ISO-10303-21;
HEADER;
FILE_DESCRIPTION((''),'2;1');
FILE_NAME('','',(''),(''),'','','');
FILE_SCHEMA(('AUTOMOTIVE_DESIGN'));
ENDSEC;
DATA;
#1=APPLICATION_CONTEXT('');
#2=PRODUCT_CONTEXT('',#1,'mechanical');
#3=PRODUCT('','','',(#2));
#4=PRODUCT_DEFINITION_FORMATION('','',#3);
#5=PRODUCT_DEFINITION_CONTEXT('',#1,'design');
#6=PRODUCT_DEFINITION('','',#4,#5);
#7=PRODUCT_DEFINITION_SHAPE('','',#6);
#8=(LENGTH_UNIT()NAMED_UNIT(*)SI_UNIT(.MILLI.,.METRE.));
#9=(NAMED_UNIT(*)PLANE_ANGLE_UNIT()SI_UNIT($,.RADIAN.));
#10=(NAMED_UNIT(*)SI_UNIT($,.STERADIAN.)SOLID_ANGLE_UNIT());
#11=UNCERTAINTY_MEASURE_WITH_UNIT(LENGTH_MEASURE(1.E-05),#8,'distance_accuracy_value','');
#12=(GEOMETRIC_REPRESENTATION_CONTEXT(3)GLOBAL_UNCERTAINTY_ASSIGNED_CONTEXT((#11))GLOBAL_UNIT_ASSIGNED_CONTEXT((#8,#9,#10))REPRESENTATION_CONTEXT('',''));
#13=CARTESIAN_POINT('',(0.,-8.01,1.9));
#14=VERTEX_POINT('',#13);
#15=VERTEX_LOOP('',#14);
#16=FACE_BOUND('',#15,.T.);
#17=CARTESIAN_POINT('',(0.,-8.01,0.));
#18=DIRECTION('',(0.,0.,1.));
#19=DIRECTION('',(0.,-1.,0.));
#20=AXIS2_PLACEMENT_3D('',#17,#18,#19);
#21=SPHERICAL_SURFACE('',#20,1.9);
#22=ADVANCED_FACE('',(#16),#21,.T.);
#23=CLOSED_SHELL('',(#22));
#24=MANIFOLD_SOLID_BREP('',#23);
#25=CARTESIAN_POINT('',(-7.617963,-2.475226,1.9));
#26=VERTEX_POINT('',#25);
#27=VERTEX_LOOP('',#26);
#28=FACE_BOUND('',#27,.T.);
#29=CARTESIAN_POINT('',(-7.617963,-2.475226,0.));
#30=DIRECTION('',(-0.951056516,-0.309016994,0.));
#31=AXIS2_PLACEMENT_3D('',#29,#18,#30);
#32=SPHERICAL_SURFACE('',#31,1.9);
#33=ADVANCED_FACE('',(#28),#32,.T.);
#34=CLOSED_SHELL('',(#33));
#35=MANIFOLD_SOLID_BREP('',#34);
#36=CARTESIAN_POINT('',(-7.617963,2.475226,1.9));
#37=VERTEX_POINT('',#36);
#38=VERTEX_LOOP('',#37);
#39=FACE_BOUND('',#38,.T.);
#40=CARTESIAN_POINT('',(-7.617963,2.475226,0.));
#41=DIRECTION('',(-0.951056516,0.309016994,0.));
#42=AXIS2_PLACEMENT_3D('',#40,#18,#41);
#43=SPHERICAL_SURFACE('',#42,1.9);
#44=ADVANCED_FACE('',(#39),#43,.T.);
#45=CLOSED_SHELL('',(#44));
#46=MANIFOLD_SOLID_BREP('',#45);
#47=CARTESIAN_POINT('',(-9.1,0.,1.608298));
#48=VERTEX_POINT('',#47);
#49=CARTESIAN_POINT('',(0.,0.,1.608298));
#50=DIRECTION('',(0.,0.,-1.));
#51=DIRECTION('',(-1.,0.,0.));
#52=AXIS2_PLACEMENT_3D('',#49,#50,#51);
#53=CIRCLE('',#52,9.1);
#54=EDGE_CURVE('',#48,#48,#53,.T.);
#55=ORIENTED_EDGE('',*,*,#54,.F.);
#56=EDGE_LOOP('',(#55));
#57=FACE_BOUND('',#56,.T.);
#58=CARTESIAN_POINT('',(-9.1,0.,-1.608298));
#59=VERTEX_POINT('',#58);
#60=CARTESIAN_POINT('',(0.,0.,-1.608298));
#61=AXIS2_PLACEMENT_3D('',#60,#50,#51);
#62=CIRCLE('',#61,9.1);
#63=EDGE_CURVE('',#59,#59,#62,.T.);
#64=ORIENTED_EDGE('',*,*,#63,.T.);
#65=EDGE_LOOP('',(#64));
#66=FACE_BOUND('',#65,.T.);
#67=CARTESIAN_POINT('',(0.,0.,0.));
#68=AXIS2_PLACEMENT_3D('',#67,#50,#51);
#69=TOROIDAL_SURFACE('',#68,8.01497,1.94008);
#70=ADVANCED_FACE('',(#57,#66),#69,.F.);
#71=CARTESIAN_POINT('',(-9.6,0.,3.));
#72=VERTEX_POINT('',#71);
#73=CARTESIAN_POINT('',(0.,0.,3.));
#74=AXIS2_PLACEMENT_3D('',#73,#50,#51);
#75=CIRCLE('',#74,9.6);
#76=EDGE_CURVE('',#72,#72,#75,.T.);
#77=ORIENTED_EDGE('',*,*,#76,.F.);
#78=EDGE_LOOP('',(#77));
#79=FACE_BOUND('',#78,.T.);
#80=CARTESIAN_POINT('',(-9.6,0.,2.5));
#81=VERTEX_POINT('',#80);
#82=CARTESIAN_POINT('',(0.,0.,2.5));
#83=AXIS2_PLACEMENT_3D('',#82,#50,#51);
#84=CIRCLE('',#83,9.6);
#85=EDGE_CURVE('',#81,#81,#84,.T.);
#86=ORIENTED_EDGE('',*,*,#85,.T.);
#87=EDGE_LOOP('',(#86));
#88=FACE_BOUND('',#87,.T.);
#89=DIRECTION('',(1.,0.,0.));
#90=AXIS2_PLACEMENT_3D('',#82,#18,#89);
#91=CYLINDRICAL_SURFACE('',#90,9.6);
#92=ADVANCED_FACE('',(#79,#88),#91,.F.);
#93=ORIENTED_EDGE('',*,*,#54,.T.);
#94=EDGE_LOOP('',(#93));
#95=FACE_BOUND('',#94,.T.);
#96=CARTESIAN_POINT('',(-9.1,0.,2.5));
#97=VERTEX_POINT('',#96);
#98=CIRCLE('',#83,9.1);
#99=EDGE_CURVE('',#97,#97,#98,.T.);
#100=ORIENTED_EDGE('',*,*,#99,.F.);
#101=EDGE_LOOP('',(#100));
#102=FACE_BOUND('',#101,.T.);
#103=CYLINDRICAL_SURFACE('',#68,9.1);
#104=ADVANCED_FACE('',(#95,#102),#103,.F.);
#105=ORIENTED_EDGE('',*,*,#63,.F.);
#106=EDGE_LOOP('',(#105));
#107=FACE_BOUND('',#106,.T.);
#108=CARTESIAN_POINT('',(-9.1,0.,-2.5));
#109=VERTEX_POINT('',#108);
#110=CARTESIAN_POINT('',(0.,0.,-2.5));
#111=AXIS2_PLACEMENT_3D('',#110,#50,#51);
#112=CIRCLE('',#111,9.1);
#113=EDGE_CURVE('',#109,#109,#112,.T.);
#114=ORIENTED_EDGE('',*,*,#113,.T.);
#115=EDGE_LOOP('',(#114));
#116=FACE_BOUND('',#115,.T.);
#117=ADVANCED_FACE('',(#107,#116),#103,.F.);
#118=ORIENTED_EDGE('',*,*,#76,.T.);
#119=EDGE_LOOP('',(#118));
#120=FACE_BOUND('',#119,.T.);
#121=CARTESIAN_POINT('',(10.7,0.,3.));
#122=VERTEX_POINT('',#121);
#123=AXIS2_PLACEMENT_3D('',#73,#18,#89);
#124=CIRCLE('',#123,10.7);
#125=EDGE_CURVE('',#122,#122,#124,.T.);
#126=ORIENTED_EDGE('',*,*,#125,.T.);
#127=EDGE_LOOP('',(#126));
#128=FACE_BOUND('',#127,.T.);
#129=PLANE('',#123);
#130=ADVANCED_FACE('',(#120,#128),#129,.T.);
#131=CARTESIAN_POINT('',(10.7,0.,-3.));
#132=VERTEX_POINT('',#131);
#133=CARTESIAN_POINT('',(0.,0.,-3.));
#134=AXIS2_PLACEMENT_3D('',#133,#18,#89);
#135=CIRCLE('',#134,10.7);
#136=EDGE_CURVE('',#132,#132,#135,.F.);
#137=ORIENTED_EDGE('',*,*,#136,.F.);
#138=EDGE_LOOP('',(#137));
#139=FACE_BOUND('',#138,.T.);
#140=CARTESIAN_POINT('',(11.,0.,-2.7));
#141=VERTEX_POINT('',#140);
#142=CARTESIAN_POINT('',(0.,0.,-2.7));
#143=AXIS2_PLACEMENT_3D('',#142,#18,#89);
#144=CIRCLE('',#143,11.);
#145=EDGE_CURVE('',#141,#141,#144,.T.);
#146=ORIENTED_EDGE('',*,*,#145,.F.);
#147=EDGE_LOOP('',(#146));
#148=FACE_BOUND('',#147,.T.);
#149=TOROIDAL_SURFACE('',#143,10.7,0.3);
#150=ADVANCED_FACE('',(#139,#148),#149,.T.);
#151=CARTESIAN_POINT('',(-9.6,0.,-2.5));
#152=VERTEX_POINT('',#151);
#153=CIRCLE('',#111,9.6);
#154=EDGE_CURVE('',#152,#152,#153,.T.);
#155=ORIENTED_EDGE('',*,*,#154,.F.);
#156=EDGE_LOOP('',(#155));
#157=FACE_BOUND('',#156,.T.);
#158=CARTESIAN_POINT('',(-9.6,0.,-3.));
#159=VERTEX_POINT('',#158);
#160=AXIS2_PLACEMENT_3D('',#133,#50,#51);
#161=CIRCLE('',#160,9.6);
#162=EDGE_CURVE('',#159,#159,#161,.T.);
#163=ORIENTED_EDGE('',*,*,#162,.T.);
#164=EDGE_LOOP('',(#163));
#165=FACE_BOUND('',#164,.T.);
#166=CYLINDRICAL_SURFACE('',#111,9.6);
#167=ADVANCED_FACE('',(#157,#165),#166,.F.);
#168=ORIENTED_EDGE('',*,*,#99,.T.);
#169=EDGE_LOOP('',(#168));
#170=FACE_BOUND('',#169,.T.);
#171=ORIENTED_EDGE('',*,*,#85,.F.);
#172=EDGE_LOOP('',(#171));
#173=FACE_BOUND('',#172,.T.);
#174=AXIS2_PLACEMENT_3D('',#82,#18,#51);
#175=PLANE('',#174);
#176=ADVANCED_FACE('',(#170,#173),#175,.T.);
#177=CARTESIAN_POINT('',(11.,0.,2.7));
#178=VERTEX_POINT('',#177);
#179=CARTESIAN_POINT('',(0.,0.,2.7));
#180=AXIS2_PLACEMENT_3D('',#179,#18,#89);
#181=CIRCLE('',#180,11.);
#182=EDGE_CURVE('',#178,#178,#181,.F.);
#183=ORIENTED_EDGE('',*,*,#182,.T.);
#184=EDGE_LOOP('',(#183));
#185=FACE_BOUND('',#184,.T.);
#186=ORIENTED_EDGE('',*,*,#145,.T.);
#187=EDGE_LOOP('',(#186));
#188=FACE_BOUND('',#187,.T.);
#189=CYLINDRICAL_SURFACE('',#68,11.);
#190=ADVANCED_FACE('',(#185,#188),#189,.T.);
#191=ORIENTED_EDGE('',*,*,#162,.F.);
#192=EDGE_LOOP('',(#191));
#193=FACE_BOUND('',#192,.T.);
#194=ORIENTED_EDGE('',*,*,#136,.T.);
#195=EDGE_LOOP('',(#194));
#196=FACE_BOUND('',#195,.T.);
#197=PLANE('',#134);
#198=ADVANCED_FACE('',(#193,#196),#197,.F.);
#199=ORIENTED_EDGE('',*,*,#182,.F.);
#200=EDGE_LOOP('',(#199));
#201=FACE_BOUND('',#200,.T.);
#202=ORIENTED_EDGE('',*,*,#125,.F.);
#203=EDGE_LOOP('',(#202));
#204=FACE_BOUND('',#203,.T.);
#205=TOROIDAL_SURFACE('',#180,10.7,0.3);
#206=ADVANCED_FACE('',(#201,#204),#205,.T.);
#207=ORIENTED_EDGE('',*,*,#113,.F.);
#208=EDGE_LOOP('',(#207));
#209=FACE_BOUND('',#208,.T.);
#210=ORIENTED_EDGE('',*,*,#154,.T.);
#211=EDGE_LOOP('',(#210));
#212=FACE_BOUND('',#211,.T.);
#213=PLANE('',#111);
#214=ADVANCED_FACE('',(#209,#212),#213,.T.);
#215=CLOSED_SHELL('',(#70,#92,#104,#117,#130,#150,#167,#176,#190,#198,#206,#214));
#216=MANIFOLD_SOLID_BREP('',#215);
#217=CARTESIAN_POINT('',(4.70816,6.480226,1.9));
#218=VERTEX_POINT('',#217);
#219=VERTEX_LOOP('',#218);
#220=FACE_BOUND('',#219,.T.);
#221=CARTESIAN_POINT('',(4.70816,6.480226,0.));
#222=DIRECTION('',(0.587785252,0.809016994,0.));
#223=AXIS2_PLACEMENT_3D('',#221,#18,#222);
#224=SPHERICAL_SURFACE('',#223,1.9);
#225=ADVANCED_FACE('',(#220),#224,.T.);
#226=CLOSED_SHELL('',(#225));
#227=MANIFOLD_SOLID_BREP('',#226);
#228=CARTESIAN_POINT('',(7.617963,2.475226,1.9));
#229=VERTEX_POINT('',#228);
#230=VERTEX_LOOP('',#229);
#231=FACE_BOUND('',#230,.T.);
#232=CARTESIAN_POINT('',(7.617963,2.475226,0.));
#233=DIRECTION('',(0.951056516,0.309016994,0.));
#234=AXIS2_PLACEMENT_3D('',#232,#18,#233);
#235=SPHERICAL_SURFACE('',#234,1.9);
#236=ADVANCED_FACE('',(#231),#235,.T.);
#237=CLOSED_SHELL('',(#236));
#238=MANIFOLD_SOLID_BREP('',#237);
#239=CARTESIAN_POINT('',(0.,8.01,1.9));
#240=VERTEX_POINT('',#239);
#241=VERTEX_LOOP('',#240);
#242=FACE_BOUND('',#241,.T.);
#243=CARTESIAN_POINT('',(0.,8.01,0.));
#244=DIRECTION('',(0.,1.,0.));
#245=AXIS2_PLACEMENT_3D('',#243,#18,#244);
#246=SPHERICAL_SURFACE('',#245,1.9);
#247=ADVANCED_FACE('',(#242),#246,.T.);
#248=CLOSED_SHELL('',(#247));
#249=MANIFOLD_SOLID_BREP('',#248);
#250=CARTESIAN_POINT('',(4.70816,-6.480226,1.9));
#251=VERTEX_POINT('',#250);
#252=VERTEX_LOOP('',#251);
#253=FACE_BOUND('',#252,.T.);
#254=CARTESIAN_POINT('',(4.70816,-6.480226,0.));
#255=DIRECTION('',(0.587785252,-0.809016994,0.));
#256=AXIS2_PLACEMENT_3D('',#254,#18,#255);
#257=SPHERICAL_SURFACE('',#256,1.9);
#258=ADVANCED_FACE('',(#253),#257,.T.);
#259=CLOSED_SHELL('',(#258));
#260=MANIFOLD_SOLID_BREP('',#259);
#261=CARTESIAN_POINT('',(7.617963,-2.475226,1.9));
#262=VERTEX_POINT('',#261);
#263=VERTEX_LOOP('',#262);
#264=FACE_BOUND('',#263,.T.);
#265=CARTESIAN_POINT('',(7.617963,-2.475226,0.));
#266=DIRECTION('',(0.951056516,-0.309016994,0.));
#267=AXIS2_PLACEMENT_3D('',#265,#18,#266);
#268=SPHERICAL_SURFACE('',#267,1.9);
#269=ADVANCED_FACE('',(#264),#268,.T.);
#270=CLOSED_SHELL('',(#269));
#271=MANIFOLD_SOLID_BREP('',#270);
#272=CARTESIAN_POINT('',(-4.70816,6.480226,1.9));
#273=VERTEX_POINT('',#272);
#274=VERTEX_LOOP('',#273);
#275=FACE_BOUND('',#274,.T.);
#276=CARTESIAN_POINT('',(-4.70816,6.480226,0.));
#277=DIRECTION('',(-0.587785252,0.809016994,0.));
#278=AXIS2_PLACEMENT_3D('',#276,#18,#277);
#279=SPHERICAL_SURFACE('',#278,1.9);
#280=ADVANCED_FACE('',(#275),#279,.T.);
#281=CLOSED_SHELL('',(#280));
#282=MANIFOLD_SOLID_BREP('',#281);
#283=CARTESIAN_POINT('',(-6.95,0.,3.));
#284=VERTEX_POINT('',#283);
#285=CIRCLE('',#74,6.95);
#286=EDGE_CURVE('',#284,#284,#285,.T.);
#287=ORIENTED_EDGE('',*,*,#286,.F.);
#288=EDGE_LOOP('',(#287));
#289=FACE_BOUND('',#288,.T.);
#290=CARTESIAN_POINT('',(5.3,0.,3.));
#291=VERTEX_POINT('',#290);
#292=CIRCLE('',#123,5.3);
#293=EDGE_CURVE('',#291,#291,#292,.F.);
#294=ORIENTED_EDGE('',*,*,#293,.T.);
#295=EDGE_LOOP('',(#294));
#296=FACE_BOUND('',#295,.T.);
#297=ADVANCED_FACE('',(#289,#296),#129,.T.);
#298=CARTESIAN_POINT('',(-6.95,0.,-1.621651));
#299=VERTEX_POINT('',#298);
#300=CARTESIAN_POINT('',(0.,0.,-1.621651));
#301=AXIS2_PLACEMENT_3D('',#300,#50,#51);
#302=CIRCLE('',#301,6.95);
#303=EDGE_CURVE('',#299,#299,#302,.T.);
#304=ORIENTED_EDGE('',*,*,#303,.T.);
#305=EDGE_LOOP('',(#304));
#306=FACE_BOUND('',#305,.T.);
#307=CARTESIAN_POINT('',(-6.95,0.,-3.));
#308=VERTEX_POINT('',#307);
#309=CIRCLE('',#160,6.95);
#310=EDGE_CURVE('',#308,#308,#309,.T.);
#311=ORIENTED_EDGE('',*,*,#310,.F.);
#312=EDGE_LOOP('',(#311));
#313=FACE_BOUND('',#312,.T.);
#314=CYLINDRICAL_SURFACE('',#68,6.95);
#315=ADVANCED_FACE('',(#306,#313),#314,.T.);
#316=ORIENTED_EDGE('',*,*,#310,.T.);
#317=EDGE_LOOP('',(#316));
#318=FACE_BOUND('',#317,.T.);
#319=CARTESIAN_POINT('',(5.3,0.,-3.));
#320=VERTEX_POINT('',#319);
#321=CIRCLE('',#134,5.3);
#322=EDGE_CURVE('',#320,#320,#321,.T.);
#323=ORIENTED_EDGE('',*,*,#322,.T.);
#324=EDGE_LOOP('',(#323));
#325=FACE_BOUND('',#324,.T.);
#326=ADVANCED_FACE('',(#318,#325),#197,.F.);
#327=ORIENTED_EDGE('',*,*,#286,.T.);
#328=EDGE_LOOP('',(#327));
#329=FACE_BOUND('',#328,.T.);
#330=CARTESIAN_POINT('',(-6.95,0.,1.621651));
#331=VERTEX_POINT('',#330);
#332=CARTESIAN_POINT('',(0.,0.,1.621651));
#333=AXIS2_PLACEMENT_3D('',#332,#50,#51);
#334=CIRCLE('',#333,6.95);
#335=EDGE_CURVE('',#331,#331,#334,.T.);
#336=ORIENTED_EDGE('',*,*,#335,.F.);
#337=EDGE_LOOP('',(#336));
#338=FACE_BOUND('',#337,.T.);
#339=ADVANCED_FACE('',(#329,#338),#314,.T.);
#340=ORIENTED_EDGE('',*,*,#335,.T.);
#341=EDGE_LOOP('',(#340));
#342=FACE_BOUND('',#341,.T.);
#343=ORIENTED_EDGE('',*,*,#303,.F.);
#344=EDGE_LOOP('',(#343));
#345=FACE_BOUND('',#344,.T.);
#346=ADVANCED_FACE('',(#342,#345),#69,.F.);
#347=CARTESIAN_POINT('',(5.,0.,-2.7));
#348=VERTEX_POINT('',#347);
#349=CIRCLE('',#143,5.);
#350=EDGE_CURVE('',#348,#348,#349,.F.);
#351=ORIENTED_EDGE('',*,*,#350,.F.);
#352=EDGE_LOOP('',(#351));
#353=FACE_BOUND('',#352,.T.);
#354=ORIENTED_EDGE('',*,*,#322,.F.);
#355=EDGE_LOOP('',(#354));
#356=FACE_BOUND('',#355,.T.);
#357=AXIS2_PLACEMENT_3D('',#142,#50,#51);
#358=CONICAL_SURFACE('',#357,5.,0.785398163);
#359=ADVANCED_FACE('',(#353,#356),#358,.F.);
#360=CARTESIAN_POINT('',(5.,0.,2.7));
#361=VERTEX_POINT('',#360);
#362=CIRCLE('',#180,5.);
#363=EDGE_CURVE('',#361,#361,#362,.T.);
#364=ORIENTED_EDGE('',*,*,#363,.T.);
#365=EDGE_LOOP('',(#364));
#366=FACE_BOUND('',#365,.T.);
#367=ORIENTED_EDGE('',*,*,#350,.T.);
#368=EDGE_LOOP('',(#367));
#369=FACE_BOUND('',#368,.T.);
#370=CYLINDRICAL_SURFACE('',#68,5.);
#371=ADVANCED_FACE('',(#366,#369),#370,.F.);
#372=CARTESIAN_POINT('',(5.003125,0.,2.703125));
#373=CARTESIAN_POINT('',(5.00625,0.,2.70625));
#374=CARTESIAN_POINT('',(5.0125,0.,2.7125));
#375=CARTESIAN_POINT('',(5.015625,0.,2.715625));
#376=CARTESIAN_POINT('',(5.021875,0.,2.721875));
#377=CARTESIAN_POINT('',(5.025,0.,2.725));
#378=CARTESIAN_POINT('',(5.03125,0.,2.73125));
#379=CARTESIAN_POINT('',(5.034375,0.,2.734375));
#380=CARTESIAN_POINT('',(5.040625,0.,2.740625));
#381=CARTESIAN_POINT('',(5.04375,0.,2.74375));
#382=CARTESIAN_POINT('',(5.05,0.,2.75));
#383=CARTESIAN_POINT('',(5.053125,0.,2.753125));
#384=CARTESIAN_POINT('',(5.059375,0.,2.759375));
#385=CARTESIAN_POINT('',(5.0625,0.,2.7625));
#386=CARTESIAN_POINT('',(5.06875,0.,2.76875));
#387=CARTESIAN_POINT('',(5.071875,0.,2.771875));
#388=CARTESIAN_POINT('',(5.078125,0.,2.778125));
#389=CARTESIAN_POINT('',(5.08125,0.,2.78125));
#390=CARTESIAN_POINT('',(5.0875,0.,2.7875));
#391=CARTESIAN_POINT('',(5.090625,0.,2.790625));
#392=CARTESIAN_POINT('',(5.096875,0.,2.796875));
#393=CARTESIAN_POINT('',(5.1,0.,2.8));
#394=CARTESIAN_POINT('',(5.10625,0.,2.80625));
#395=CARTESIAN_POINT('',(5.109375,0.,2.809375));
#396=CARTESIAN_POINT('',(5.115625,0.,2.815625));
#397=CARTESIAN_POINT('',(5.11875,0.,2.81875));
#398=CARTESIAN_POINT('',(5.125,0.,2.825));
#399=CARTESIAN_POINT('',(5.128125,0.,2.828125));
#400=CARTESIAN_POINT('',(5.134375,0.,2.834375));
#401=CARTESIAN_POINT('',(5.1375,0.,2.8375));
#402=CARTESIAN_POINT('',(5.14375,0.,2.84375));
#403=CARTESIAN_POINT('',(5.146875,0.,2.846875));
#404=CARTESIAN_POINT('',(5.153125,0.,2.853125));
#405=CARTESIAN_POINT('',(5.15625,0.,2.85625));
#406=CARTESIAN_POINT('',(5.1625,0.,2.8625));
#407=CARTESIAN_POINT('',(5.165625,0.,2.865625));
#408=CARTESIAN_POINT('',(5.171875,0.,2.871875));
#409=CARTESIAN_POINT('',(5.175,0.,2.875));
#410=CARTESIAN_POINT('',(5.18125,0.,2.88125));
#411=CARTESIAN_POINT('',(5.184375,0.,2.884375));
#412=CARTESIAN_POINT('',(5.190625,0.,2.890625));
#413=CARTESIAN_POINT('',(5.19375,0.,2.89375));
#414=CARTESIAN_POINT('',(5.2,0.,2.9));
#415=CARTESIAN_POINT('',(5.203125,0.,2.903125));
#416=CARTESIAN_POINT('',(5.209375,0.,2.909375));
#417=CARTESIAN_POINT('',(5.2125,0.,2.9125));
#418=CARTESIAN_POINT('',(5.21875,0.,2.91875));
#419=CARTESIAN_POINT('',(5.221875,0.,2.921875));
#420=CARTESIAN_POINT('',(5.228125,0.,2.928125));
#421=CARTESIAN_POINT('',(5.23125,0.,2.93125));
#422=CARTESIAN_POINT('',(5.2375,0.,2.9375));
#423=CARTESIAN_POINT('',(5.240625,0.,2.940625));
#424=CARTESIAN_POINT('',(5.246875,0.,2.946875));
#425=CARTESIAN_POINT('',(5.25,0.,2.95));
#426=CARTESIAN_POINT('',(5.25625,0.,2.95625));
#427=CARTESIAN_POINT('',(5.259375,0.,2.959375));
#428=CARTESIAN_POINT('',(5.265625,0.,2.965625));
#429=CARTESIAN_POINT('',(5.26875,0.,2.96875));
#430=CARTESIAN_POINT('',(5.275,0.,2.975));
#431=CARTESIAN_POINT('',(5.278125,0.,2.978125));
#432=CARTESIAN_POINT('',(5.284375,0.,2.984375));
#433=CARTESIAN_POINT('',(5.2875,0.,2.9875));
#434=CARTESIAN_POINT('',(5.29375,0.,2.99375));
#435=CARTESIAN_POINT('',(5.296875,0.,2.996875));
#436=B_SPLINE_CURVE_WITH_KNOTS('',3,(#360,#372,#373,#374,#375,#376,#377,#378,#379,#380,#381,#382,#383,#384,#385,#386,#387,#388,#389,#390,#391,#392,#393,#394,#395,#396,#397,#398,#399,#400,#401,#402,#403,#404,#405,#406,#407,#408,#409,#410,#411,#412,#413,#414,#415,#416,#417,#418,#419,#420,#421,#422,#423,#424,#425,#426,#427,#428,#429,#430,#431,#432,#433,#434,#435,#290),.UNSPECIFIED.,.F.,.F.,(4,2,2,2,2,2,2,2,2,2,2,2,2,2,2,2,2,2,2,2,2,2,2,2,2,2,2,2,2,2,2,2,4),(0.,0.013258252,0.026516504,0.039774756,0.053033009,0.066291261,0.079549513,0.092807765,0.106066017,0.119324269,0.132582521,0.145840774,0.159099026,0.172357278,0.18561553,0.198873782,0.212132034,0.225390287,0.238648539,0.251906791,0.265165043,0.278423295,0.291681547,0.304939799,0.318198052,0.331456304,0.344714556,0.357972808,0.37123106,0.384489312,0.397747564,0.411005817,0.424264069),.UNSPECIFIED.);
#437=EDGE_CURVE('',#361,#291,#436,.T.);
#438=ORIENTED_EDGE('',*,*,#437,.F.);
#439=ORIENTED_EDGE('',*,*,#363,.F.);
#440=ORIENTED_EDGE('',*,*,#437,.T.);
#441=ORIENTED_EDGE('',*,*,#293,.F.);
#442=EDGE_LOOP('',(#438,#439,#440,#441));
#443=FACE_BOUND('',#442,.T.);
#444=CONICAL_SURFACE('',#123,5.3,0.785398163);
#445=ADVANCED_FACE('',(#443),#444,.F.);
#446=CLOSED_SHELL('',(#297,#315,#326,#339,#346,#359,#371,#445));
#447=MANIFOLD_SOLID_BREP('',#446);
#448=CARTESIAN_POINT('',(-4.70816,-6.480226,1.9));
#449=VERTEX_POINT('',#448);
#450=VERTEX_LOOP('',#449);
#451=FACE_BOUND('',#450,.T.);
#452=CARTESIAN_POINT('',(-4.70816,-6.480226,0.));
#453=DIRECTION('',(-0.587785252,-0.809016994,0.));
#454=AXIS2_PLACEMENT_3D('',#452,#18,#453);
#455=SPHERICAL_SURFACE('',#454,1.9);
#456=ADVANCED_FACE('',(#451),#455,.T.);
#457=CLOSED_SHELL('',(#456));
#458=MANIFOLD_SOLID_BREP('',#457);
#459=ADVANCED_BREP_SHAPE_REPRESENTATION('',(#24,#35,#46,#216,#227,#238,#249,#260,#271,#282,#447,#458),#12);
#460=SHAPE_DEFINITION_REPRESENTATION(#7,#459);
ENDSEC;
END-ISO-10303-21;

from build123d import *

# Parameters (mm, degrees)
CIRPATTERN3_COUNT  = 10
SKETCH10_R         = 9.6
SKETCH10_R_2       = 9.1
CUT_EXTRUDE1_DEPTH = 0.5
FILLET1_R          = 0.3
CHAMFER1_SIZE      = 0.3


with BuildPart() as part:
    # Sketch6 → Revolve2 (revolve)
    with BuildSketch(Plane(origin=(0, 0, 0), x_dir=(0, 0, -1), z_dir=(1, 0, 0))):
        with BuildLine():
            Line((3, 9.1), (3, 11))
            Line((3, 11), (-3, 11))
            Line((-3, 11), (-3, 9.1))
            Line((-3, 9.1), (-1.608297601, 9.1))
            ThreePointArc((-1.608297601, 9.1), (0, 9.955050006), (1.608297601, 9.1))
            Line((1.608297601, 9.1), (3, 9.1))
        make_face()
        with BuildLine():
            ThreePointArc((1.621651102, 6.95), (0, 6.074889007), (-1.621651102, 6.95))
            Line((-1.621651102, 6.95), (-3, 6.95))
            Line((-3, 6.95), (-3, 5))
            Line((-3, 5), (3, 5))
            Line((3, 5), (3, 6.95))
            Line((3, 6.95), (1.621651102, 6.95))
        make_face()
    revolve(axis=Axis((0, 0, 0), (0, 0, 1)))

    # Sketch10 → Cut-Extrude1 (cut)
    with BuildSketch(Plane(origin=(0, 0, -3), x_dir=(-1, 0, 0), z_dir=(0, 0, -1))):
        Circle(SKETCH10_R)
        Circle(SKETCH10_R_2, mode=Mode.SUBTRACT)
    cut_extrude1 = extrude(amount=-CUT_EXTRUDE1_DEPTH, mode=Mode.SUBTRACT)

    # Mirror1: Cut-Extrude1 across plane
    add(cut_extrude1.mirror(Plane.XY), mode=Mode.SUBTRACT)

    # Fillet1
    fillet1_edges = [part.edges().sort_by_distance(p)[0] for p in [
        (0, -11, -3),
        (0, -11, 3),
    ]]
    fillet(fillet1_edges, radius=FILLET1_R)

    # Chamfer1
    chamfer1_edges = [part.edges().sort_by_distance(p)[0] for p in [
        (0, -5, -3),
        (0, -5, 3),
    ]]
    chamfer(chamfer1_edges, length=CHAMFER1_SIZE)


with BuildPart() as body_2:
    # Sketch9 → Revolve3 (revolve)
    with BuildSketch(Plane(origin=(0, 0, 0), x_dir=(0, 0, -1), z_dir=(1, 0, 0))):
        with BuildLine():
            ThreePointArc((1.9, 8.01), (0, 9.91), (-1.9, 8.01))
            Line((-1.9, 8.01), (1.9, 8.01))
        make_face()
    revolve(axis=Axis((0, 8.01, 1.9), (0, 0, -1)))


with BuildPart() as cirpattern3_1:
    # CirPattern3: pattern copy
    add(body_2.part.rotate(Axis((0, 0, 3), (0, 0, -1)), 1 * 360 / CIRPATTERN3_COUNT))


with BuildPart() as cirpattern3_2:
    # CirPattern3: pattern copy
    add(body_2.part.rotate(Axis((0, 0, 3), (0, 0, -1)), 2 * 360 / CIRPATTERN3_COUNT))


with BuildPart() as cirpattern3_3:
    # CirPattern3: pattern copy
    add(body_2.part.rotate(Axis((0, 0, 3), (0, 0, -1)), 3 * 360 / CIRPATTERN3_COUNT))


with BuildPart() as cirpattern3_4:
    # CirPattern3: pattern copy
    add(body_2.part.rotate(Axis((0, 0, 3), (0, 0, -1)), 4 * 360 / CIRPATTERN3_COUNT))


with BuildPart() as cirpattern3_5:
    # CirPattern3: pattern copy
    add(body_2.part.rotate(Axis((0, 0, 3), (0, 0, -1)), 5 * 360 / CIRPATTERN3_COUNT))


with BuildPart() as cirpattern3_6:
    # CirPattern3: pattern copy
    add(body_2.part.rotate(Axis((0, 0, 3), (0, 0, -1)), 6 * 360 / CIRPATTERN3_COUNT))


with BuildPart() as cirpattern3_7:
    # CirPattern3: pattern copy
    add(body_2.part.rotate(Axis((0, 0, 3), (0, 0, -1)), 7 * 360 / CIRPATTERN3_COUNT))


with BuildPart() as cirpattern3_8:
    # CirPattern3: pattern copy
    add(body_2.part.rotate(Axis((0, 0, 3), (0, 0, -1)), 8 * 360 / CIRPATTERN3_COUNT))


with BuildPart() as cirpattern3_9:
    # CirPattern3: pattern copy
    add(body_2.part.rotate(Axis((0, 0, 3), (0, 0, -1)), 9 * 360 / CIRPATTERN3_COUNT))


solid = Compound([part.part, body_2.part, cirpattern3_1.part, cirpattern3_2.part, cirpattern3_3.part, cirpattern3_4.part, cirpattern3_5.part, cirpattern3_6.part, cirpattern3_7.part, cirpattern3_8.part, cirpattern3_9.part])
